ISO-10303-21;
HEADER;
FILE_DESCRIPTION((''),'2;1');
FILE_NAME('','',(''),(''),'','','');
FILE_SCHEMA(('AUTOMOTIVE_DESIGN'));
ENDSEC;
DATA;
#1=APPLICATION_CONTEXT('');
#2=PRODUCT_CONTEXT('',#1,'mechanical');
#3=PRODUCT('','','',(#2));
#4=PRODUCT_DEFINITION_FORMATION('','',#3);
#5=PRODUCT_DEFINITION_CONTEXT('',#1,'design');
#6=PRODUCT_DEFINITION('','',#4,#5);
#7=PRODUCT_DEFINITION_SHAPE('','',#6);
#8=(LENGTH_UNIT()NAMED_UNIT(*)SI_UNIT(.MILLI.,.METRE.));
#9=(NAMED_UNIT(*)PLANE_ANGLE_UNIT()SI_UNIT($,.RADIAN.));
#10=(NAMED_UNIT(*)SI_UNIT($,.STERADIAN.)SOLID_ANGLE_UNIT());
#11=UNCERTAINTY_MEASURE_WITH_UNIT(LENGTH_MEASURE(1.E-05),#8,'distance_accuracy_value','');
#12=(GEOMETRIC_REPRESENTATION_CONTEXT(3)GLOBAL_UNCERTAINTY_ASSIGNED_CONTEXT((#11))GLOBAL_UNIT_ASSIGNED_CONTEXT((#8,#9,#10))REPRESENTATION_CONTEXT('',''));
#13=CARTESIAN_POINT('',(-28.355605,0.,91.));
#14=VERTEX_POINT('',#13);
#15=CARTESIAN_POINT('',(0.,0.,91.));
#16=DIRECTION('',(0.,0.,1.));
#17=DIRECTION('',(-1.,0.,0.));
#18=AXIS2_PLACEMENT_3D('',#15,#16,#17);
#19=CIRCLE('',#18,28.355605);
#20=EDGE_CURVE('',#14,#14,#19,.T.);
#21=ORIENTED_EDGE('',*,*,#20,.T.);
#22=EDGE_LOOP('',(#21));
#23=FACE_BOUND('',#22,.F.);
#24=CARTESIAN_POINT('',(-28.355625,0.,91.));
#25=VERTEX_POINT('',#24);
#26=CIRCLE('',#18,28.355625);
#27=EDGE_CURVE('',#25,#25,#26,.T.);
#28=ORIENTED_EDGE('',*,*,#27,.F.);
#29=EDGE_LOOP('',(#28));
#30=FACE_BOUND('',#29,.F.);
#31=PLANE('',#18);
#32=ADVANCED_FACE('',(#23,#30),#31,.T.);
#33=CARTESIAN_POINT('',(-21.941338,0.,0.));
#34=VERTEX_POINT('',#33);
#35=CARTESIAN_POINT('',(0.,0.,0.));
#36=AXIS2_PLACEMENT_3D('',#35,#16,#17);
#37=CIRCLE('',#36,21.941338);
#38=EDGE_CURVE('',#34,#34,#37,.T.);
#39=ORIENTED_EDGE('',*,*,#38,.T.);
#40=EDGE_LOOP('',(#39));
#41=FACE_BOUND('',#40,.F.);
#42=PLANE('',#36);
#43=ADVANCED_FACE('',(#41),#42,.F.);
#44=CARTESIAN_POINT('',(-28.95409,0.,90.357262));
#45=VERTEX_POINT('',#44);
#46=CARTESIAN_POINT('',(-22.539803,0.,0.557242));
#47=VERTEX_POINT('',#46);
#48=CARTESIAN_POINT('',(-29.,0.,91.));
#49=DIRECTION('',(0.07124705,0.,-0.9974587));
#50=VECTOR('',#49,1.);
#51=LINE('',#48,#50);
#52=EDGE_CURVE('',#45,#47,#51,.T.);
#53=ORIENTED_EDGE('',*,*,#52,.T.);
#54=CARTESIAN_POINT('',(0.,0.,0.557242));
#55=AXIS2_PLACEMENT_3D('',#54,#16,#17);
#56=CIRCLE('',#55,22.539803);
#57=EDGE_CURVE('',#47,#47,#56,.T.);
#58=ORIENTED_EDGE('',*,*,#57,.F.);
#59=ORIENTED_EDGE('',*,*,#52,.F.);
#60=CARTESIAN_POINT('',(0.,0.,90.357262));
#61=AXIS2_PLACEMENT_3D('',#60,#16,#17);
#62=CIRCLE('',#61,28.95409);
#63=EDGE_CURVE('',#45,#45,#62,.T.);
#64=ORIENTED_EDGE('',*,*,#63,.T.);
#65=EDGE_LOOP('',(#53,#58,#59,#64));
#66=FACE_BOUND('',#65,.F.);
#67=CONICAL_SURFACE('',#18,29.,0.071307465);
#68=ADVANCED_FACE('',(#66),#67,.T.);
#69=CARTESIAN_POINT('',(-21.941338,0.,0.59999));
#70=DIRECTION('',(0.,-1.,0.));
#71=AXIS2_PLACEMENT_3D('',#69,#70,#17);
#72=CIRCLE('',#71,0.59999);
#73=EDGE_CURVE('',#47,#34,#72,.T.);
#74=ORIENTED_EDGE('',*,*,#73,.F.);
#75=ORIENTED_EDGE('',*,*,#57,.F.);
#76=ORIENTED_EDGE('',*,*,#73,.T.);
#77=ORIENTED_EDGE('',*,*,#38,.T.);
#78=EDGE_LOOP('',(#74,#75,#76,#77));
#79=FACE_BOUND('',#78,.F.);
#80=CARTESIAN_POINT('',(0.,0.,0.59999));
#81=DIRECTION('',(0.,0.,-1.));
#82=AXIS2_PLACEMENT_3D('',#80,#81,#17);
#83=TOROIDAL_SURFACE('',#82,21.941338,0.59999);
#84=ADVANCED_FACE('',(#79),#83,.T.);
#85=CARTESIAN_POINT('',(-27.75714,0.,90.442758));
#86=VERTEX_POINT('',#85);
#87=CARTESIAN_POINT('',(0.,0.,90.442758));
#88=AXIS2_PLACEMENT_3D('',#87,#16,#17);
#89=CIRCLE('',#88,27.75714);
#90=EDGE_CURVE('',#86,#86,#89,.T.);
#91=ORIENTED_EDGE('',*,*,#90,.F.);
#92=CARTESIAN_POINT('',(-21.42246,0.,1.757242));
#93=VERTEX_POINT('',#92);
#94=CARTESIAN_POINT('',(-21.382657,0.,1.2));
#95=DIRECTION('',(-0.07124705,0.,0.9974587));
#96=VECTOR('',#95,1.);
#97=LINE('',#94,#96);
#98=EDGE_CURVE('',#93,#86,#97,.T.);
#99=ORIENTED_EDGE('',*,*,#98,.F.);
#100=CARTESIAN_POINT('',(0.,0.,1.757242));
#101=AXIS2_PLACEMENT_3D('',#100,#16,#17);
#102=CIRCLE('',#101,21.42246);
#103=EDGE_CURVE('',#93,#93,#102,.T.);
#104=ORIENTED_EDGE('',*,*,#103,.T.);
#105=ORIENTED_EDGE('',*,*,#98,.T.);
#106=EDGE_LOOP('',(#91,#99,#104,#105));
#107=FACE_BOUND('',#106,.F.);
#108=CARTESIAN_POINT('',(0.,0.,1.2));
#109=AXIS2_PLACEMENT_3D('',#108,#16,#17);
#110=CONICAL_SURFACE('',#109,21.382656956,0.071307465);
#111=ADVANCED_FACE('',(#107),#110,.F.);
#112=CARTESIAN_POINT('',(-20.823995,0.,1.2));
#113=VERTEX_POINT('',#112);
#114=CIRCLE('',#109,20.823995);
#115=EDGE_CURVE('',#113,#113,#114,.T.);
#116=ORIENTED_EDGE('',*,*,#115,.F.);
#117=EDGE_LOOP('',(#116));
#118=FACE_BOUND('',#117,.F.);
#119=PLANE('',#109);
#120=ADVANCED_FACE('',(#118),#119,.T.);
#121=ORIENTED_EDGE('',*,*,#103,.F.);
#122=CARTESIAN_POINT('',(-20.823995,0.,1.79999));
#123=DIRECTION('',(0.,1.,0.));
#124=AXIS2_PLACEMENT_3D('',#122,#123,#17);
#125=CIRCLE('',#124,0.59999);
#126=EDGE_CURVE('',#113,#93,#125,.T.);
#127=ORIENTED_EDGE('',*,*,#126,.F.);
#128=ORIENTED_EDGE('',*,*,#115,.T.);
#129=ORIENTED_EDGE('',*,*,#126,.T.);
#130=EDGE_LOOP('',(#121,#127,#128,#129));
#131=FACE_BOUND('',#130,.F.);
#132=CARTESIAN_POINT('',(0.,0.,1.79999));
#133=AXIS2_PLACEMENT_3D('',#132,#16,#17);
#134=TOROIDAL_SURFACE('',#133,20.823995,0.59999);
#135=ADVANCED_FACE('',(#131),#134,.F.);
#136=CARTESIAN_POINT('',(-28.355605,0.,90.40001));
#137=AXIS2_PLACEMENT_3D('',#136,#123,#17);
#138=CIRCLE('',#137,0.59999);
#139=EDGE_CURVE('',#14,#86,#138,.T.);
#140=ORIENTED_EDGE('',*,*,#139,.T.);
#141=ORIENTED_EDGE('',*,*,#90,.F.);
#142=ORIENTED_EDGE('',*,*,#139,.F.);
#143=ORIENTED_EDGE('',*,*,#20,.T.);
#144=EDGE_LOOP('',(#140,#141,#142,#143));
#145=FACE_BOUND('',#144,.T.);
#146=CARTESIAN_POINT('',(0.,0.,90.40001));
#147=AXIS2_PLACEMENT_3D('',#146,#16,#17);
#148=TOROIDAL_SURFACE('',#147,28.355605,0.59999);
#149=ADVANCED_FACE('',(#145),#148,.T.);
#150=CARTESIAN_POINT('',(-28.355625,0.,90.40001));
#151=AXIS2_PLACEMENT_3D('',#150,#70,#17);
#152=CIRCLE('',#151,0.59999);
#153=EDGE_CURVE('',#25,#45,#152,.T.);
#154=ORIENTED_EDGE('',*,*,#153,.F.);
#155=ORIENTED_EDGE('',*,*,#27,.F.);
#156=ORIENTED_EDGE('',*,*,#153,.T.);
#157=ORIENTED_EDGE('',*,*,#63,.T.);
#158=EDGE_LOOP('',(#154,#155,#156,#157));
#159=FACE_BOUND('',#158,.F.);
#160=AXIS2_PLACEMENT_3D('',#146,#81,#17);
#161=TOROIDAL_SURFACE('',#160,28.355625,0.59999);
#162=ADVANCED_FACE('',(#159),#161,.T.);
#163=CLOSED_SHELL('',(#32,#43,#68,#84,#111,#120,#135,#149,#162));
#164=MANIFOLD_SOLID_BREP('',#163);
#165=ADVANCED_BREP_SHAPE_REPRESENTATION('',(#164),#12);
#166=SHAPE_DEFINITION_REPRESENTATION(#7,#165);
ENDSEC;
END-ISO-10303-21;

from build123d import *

# Parameters (mm, degrees)
F2_R = 0.59999


# Not quite as in the source:
# - a fillet or chamfer is up to 0.001 mm smaller than in the source, because OpenCascade refuses the exact size


with BuildPart() as f1:
    # F0 (on Front) → F1 (revolve)
    with BuildSketch(Plane.XZ):
        Polygon((-27.7969426702, 91), (-29, 91), (-22.5, 0), (0, 0), (0, 1.2), (-21.3826569559, 1.2), align=None)
    revolve(axis=Axis((0, 0, 25.3364025), (0, 0, 1)))

    # F2 (radius 0.6 in the source; OpenCascade refuses exactly that, so slightly less here)
    f2_edges = [f1.edges().sort_by_distance(p)[0] for p in [
        (27.796943, 0, 91),
        (29, 0, 91),
        (21.382657, 0, 1.2),
        (22.5, 0, 0),
    ]]
    fillet(f2_edges, radius=F2_R)


solid = f1.part
